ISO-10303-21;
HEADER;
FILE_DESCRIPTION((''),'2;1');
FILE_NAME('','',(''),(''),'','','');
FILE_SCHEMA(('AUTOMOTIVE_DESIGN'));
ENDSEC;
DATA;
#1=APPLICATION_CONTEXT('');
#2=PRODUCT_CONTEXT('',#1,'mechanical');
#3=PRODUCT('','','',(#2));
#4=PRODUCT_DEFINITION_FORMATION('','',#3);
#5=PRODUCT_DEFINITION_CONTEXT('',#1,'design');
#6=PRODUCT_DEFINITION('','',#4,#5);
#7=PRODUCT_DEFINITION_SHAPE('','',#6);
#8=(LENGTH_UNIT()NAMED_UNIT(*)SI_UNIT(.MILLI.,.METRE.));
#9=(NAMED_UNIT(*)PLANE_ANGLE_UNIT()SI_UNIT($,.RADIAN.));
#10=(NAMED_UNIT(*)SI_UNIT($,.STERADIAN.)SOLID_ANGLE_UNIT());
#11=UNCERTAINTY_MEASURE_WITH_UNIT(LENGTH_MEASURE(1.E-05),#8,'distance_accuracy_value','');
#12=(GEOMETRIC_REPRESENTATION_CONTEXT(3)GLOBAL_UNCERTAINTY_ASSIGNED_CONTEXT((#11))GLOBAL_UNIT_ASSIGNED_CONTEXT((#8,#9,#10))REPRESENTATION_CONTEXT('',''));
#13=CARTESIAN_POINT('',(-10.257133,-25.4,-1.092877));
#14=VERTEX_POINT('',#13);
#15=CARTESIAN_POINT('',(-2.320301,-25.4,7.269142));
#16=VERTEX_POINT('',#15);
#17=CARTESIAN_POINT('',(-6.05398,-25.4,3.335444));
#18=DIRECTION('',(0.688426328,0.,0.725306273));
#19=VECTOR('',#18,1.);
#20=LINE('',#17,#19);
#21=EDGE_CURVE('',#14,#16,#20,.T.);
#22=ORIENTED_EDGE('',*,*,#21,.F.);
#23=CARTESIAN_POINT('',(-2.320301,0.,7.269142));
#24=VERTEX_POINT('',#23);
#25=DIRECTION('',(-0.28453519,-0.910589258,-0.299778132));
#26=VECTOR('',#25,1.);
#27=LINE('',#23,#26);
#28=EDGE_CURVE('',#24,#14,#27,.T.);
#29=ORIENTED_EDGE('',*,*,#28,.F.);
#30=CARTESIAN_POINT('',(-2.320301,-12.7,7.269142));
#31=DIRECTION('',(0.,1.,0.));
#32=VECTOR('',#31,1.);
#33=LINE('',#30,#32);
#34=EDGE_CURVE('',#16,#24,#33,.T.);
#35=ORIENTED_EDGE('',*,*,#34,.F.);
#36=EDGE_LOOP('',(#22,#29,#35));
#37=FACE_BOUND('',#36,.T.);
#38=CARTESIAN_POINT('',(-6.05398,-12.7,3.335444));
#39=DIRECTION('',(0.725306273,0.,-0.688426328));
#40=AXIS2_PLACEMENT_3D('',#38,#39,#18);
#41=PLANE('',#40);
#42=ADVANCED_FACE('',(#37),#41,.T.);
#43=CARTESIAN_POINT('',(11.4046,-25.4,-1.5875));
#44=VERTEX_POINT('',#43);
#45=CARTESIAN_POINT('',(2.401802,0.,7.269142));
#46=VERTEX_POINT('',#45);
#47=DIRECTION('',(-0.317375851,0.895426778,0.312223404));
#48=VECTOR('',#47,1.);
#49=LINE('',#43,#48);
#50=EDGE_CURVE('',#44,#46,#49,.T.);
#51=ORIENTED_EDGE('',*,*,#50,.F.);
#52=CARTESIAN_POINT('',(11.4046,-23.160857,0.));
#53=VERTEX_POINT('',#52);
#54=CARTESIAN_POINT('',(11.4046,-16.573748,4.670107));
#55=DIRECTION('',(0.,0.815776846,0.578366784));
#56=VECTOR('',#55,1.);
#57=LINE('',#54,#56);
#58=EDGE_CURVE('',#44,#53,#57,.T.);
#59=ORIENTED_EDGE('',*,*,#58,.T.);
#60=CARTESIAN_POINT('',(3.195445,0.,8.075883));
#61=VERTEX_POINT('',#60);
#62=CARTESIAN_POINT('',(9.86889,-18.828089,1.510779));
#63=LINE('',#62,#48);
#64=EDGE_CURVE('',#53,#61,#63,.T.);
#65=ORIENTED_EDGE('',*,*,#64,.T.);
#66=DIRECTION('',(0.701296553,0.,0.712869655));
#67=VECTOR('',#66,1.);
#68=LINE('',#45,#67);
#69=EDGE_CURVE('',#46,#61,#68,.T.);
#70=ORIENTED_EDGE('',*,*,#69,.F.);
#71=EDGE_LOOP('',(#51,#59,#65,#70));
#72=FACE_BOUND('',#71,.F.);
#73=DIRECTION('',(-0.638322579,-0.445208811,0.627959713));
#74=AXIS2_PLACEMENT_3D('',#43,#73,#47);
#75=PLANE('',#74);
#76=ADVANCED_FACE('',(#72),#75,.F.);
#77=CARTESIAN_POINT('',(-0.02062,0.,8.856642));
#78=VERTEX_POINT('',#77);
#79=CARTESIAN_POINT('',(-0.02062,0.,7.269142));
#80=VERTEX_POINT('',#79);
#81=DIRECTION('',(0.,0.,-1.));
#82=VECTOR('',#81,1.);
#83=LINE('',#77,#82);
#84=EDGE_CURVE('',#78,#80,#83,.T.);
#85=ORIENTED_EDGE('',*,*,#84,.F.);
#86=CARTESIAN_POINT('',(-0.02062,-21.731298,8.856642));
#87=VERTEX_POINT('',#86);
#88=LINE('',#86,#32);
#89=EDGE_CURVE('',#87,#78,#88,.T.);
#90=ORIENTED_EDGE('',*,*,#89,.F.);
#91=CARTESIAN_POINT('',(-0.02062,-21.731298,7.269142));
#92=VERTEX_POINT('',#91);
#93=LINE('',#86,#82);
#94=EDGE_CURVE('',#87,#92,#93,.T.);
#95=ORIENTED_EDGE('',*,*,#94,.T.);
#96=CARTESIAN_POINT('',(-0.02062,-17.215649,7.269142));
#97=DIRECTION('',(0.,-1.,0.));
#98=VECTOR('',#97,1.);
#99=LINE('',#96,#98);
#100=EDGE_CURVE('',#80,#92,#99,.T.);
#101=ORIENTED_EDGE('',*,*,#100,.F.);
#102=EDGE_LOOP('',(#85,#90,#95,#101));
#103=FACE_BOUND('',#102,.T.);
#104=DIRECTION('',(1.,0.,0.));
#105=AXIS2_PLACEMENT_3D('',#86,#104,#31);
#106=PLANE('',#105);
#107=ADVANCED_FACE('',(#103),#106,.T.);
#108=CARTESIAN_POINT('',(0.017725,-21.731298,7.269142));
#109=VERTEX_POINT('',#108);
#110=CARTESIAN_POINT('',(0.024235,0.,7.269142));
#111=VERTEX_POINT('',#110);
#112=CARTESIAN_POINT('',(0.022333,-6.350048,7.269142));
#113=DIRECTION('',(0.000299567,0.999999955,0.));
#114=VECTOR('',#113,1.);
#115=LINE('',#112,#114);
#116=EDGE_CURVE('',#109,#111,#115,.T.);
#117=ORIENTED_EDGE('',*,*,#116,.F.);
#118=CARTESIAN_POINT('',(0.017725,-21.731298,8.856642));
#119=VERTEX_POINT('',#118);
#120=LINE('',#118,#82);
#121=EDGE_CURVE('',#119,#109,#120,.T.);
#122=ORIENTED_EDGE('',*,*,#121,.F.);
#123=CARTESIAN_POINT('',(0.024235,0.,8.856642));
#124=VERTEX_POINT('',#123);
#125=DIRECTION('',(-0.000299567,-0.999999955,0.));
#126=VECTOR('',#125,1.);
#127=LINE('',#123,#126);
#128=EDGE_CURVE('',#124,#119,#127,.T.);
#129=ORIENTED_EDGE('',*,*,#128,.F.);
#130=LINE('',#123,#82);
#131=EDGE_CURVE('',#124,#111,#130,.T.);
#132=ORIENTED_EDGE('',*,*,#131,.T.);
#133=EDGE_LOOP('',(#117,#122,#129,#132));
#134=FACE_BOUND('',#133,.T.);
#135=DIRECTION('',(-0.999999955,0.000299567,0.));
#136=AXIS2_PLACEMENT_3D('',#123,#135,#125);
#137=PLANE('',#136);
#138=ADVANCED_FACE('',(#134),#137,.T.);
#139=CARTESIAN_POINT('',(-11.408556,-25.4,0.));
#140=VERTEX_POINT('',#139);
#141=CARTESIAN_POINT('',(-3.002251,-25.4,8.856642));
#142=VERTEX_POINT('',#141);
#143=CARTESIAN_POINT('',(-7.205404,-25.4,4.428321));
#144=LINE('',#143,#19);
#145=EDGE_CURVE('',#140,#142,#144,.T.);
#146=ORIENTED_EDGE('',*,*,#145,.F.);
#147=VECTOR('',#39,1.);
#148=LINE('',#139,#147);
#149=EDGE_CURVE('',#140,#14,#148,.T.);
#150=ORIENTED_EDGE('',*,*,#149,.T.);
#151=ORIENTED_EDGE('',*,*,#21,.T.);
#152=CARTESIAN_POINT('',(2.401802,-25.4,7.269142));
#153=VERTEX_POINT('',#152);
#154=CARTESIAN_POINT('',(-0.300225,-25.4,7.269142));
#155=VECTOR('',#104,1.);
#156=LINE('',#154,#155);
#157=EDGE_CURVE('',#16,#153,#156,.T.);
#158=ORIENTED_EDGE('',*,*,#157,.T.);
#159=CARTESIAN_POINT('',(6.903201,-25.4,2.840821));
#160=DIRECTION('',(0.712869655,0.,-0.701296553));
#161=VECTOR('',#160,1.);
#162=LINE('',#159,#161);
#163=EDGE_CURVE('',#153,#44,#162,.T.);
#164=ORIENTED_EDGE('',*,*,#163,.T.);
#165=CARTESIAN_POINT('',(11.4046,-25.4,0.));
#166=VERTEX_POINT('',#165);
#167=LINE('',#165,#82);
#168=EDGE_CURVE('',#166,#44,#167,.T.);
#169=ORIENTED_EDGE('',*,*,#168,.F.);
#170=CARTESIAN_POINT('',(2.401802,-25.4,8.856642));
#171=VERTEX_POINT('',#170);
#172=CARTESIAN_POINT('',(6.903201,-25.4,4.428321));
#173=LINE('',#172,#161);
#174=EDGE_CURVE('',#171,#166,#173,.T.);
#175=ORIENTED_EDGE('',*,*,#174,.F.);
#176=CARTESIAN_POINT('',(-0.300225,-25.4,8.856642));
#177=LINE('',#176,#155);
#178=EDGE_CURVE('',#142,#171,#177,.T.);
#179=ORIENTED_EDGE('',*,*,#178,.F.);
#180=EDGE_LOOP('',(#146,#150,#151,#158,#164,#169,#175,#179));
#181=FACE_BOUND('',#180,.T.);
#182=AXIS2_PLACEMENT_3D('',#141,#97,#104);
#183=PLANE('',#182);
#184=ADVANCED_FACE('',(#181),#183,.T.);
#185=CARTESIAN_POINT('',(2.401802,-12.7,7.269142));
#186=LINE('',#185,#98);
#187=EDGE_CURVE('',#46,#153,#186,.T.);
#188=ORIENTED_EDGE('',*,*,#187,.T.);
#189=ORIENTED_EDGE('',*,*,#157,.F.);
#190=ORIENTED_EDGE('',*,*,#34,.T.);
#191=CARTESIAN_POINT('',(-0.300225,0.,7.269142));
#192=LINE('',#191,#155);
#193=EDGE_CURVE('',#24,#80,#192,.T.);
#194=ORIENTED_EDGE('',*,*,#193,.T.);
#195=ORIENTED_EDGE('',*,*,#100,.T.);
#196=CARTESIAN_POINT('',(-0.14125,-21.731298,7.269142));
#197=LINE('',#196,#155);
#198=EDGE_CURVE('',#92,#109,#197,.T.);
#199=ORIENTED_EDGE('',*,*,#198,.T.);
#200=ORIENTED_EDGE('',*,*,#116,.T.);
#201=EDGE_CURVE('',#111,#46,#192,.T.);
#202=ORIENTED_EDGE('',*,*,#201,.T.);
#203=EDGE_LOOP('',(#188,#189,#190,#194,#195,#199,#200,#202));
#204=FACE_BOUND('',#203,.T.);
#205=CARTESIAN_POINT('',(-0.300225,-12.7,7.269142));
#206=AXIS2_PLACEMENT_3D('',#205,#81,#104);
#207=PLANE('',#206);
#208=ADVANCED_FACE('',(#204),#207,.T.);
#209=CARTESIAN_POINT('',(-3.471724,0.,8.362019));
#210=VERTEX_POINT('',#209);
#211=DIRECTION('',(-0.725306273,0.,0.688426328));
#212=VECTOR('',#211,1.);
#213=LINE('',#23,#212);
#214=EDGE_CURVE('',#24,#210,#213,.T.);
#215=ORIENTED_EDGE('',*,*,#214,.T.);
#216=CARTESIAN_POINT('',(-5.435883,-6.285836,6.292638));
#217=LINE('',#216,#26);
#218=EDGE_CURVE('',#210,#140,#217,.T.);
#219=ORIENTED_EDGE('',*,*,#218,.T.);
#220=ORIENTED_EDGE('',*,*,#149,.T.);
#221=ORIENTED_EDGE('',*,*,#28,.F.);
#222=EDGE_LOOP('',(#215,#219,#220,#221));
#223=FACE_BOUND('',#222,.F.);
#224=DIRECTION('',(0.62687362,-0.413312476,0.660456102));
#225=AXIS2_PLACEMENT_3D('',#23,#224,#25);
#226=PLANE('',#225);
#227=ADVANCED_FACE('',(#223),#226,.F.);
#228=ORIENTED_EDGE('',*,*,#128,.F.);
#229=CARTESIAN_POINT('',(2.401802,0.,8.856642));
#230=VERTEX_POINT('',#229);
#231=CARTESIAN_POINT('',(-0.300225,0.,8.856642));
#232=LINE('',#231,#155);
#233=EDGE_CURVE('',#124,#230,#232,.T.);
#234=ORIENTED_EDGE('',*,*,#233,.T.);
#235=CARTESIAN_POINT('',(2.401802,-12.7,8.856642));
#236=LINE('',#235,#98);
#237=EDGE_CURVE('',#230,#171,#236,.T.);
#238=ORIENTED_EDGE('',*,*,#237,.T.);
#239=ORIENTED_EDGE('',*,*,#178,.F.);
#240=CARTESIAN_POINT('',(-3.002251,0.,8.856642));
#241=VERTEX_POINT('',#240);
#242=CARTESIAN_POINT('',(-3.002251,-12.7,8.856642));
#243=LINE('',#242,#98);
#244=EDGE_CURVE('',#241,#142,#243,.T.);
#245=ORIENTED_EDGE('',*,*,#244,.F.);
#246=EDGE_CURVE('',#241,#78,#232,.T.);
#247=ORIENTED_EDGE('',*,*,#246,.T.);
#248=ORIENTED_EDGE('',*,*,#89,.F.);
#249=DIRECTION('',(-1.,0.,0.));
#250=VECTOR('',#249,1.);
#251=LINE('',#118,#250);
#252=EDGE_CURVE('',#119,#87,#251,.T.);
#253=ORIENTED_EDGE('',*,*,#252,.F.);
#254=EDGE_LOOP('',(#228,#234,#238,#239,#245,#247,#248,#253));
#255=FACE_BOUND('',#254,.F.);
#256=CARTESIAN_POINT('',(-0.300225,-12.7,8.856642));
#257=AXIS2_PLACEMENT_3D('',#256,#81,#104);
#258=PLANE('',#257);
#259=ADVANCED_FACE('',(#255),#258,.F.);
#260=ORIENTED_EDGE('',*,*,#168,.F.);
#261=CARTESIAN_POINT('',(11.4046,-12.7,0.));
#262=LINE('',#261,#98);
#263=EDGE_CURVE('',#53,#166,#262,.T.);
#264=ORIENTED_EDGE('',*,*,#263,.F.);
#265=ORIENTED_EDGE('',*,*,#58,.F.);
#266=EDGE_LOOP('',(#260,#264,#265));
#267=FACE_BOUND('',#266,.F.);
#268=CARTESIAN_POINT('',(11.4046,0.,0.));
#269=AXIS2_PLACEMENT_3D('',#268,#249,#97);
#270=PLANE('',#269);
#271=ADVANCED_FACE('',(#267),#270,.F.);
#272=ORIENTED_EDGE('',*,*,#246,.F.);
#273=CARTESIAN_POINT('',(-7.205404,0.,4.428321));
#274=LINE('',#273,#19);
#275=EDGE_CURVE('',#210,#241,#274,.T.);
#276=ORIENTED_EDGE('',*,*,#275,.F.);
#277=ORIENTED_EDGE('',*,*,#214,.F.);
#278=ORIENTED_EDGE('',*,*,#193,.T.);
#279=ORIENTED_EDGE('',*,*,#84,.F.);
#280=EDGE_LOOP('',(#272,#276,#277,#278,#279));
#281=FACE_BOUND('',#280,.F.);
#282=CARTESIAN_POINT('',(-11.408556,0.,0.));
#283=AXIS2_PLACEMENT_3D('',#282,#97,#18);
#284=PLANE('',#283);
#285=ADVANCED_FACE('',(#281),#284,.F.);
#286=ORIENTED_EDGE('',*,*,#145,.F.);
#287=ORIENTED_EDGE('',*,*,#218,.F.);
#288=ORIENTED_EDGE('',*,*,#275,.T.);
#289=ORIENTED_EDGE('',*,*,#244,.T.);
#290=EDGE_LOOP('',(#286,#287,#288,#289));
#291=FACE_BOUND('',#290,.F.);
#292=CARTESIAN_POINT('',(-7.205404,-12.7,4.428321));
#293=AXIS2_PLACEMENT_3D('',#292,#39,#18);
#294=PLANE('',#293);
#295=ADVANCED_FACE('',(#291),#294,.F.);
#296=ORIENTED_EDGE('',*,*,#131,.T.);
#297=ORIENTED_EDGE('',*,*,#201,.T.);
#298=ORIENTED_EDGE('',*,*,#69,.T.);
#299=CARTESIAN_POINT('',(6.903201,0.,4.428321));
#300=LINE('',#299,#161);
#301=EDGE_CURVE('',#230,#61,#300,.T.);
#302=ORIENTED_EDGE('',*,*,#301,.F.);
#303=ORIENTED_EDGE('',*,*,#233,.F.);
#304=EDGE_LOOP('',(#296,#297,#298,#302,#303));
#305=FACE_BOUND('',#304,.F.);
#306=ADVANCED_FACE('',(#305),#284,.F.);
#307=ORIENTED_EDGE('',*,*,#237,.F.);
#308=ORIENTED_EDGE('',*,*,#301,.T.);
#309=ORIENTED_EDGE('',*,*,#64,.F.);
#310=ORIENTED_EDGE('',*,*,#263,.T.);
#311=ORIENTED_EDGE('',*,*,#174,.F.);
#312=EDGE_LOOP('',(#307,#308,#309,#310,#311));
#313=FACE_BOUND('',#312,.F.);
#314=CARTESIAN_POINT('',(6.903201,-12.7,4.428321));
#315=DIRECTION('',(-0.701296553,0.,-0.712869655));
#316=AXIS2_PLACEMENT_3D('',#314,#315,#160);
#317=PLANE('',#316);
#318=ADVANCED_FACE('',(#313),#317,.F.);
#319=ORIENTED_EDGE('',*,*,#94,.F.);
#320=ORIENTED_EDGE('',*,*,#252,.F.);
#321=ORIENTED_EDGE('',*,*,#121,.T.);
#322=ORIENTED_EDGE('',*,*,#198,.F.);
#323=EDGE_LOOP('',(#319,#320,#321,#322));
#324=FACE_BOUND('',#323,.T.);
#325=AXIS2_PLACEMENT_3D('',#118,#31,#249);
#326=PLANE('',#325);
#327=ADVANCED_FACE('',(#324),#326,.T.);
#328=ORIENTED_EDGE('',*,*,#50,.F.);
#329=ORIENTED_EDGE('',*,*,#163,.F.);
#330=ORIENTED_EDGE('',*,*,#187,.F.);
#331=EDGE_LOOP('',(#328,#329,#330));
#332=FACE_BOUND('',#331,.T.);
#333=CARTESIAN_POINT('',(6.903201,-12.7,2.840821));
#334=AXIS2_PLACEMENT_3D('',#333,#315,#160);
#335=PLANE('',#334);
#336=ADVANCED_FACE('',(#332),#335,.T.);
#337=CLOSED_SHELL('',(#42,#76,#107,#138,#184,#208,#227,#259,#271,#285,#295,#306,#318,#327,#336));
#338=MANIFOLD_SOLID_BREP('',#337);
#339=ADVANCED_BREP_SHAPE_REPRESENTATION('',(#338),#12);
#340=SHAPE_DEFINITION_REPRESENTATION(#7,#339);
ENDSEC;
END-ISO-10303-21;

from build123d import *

# Parameters (mm, degrees)
F1_E0_W  = 12.2108995656
F1_E0_H  = 25.4
F2_DEPTH = 1.5875
F1_E1_W  = 5.4040532559
F1_E1_H  = 25.4
F1_E2_W  = 12.6289542233
F1_E2_H  = 25.4
F3_DEPTH = 1.5875
F5_DEPTH = 6.35
F7_DEPTH = 25.4
F9_DEPTH = 3.683


with BuildPart() as f2:
    # F1_E0 (on explicit) → F2 (new body)
    with BuildSketch(Plane(origin=(-11.4085562527, 0, 0), x_dir=(0.6884263284, 0, 0.7253062735), z_dir=(0.7253062735, 0, -0.6884263284))):
        with Locations((6.1054497828, 12.7)):
            Rectangle(F1_E0_W, F1_E0_H)
    extrude(amount=F2_DEPTH)

    # F1_E1 (on explicit) + F1_E2 (on explicit) → F3 (join)
    with BuildSketch(Plane(origin=(-3.0022514984, 0, 8.85664206), x_dir=(1, 0, 0), z_dir=(0, 0, -1))):
        with Locations((2.702026628, 12.7)):
            Rectangle(F1_E1_W, F1_E1_H)
    with BuildSketch(Plane(origin=(2.4018017575, 0, 8.85664206), x_dir=(0.7128696552, 0, -0.7012965526), z_dir=(-0.7012965526, 0, -0.7128696552))):
        with Locations((6.3144771116, 12.7)):
            Rectangle(F1_E2_W, F1_E2_H)
    extrude(amount=F3_DEPTH, dir=(0, 0, -1))

    # F4 (on face) → F5 (cut)
    with BuildSketch(Plane(origin=(-4.850266242, 0, 4.6036427682), x_dir=(0, 1, 0), z_dir=(0.7253062735, 0, -0.6884263284))):
        Polygon((0, 3.6749982582), (-25.4, -7.8539504933), (0, -7.8539504933), align=None)
    extrude(amount=-F5_DEPTH, mode=Mode.SUBTRACT)

    # F6 (on face) → F7 (cut)
    with BuildSketch(Plane(origin=(4.8153308136, 0, 4.8947955096), x_dir=(0.7128696552, 0, -0.7012965526), z_dir=(-0.7012965526, 0, -0.7128696552))):
        Polygon((9.2433015468, 25.4), (-3.3856526765, 0), (9.2433015468, 0), align=None)
    extrude(amount=-F7_DEPTH, mode=Mode.SUBTRACT)

    # F8 (on face) → F9 (cut)
    with BuildSketch(Plane(origin=(0, 0, 8.85664206), x_dir=(1, 0, 0), z_dir=(0, 0, -1))):
        Polygon((0.017724813, 21.7312984169), (-0.0206197838, 21.7312984169), (-0.0206197838, 0), (0.0242347851, 0), align=None)
    extrude(amount=F9_DEPTH, mode=Mode.SUBTRACT)


solid = f2.part
